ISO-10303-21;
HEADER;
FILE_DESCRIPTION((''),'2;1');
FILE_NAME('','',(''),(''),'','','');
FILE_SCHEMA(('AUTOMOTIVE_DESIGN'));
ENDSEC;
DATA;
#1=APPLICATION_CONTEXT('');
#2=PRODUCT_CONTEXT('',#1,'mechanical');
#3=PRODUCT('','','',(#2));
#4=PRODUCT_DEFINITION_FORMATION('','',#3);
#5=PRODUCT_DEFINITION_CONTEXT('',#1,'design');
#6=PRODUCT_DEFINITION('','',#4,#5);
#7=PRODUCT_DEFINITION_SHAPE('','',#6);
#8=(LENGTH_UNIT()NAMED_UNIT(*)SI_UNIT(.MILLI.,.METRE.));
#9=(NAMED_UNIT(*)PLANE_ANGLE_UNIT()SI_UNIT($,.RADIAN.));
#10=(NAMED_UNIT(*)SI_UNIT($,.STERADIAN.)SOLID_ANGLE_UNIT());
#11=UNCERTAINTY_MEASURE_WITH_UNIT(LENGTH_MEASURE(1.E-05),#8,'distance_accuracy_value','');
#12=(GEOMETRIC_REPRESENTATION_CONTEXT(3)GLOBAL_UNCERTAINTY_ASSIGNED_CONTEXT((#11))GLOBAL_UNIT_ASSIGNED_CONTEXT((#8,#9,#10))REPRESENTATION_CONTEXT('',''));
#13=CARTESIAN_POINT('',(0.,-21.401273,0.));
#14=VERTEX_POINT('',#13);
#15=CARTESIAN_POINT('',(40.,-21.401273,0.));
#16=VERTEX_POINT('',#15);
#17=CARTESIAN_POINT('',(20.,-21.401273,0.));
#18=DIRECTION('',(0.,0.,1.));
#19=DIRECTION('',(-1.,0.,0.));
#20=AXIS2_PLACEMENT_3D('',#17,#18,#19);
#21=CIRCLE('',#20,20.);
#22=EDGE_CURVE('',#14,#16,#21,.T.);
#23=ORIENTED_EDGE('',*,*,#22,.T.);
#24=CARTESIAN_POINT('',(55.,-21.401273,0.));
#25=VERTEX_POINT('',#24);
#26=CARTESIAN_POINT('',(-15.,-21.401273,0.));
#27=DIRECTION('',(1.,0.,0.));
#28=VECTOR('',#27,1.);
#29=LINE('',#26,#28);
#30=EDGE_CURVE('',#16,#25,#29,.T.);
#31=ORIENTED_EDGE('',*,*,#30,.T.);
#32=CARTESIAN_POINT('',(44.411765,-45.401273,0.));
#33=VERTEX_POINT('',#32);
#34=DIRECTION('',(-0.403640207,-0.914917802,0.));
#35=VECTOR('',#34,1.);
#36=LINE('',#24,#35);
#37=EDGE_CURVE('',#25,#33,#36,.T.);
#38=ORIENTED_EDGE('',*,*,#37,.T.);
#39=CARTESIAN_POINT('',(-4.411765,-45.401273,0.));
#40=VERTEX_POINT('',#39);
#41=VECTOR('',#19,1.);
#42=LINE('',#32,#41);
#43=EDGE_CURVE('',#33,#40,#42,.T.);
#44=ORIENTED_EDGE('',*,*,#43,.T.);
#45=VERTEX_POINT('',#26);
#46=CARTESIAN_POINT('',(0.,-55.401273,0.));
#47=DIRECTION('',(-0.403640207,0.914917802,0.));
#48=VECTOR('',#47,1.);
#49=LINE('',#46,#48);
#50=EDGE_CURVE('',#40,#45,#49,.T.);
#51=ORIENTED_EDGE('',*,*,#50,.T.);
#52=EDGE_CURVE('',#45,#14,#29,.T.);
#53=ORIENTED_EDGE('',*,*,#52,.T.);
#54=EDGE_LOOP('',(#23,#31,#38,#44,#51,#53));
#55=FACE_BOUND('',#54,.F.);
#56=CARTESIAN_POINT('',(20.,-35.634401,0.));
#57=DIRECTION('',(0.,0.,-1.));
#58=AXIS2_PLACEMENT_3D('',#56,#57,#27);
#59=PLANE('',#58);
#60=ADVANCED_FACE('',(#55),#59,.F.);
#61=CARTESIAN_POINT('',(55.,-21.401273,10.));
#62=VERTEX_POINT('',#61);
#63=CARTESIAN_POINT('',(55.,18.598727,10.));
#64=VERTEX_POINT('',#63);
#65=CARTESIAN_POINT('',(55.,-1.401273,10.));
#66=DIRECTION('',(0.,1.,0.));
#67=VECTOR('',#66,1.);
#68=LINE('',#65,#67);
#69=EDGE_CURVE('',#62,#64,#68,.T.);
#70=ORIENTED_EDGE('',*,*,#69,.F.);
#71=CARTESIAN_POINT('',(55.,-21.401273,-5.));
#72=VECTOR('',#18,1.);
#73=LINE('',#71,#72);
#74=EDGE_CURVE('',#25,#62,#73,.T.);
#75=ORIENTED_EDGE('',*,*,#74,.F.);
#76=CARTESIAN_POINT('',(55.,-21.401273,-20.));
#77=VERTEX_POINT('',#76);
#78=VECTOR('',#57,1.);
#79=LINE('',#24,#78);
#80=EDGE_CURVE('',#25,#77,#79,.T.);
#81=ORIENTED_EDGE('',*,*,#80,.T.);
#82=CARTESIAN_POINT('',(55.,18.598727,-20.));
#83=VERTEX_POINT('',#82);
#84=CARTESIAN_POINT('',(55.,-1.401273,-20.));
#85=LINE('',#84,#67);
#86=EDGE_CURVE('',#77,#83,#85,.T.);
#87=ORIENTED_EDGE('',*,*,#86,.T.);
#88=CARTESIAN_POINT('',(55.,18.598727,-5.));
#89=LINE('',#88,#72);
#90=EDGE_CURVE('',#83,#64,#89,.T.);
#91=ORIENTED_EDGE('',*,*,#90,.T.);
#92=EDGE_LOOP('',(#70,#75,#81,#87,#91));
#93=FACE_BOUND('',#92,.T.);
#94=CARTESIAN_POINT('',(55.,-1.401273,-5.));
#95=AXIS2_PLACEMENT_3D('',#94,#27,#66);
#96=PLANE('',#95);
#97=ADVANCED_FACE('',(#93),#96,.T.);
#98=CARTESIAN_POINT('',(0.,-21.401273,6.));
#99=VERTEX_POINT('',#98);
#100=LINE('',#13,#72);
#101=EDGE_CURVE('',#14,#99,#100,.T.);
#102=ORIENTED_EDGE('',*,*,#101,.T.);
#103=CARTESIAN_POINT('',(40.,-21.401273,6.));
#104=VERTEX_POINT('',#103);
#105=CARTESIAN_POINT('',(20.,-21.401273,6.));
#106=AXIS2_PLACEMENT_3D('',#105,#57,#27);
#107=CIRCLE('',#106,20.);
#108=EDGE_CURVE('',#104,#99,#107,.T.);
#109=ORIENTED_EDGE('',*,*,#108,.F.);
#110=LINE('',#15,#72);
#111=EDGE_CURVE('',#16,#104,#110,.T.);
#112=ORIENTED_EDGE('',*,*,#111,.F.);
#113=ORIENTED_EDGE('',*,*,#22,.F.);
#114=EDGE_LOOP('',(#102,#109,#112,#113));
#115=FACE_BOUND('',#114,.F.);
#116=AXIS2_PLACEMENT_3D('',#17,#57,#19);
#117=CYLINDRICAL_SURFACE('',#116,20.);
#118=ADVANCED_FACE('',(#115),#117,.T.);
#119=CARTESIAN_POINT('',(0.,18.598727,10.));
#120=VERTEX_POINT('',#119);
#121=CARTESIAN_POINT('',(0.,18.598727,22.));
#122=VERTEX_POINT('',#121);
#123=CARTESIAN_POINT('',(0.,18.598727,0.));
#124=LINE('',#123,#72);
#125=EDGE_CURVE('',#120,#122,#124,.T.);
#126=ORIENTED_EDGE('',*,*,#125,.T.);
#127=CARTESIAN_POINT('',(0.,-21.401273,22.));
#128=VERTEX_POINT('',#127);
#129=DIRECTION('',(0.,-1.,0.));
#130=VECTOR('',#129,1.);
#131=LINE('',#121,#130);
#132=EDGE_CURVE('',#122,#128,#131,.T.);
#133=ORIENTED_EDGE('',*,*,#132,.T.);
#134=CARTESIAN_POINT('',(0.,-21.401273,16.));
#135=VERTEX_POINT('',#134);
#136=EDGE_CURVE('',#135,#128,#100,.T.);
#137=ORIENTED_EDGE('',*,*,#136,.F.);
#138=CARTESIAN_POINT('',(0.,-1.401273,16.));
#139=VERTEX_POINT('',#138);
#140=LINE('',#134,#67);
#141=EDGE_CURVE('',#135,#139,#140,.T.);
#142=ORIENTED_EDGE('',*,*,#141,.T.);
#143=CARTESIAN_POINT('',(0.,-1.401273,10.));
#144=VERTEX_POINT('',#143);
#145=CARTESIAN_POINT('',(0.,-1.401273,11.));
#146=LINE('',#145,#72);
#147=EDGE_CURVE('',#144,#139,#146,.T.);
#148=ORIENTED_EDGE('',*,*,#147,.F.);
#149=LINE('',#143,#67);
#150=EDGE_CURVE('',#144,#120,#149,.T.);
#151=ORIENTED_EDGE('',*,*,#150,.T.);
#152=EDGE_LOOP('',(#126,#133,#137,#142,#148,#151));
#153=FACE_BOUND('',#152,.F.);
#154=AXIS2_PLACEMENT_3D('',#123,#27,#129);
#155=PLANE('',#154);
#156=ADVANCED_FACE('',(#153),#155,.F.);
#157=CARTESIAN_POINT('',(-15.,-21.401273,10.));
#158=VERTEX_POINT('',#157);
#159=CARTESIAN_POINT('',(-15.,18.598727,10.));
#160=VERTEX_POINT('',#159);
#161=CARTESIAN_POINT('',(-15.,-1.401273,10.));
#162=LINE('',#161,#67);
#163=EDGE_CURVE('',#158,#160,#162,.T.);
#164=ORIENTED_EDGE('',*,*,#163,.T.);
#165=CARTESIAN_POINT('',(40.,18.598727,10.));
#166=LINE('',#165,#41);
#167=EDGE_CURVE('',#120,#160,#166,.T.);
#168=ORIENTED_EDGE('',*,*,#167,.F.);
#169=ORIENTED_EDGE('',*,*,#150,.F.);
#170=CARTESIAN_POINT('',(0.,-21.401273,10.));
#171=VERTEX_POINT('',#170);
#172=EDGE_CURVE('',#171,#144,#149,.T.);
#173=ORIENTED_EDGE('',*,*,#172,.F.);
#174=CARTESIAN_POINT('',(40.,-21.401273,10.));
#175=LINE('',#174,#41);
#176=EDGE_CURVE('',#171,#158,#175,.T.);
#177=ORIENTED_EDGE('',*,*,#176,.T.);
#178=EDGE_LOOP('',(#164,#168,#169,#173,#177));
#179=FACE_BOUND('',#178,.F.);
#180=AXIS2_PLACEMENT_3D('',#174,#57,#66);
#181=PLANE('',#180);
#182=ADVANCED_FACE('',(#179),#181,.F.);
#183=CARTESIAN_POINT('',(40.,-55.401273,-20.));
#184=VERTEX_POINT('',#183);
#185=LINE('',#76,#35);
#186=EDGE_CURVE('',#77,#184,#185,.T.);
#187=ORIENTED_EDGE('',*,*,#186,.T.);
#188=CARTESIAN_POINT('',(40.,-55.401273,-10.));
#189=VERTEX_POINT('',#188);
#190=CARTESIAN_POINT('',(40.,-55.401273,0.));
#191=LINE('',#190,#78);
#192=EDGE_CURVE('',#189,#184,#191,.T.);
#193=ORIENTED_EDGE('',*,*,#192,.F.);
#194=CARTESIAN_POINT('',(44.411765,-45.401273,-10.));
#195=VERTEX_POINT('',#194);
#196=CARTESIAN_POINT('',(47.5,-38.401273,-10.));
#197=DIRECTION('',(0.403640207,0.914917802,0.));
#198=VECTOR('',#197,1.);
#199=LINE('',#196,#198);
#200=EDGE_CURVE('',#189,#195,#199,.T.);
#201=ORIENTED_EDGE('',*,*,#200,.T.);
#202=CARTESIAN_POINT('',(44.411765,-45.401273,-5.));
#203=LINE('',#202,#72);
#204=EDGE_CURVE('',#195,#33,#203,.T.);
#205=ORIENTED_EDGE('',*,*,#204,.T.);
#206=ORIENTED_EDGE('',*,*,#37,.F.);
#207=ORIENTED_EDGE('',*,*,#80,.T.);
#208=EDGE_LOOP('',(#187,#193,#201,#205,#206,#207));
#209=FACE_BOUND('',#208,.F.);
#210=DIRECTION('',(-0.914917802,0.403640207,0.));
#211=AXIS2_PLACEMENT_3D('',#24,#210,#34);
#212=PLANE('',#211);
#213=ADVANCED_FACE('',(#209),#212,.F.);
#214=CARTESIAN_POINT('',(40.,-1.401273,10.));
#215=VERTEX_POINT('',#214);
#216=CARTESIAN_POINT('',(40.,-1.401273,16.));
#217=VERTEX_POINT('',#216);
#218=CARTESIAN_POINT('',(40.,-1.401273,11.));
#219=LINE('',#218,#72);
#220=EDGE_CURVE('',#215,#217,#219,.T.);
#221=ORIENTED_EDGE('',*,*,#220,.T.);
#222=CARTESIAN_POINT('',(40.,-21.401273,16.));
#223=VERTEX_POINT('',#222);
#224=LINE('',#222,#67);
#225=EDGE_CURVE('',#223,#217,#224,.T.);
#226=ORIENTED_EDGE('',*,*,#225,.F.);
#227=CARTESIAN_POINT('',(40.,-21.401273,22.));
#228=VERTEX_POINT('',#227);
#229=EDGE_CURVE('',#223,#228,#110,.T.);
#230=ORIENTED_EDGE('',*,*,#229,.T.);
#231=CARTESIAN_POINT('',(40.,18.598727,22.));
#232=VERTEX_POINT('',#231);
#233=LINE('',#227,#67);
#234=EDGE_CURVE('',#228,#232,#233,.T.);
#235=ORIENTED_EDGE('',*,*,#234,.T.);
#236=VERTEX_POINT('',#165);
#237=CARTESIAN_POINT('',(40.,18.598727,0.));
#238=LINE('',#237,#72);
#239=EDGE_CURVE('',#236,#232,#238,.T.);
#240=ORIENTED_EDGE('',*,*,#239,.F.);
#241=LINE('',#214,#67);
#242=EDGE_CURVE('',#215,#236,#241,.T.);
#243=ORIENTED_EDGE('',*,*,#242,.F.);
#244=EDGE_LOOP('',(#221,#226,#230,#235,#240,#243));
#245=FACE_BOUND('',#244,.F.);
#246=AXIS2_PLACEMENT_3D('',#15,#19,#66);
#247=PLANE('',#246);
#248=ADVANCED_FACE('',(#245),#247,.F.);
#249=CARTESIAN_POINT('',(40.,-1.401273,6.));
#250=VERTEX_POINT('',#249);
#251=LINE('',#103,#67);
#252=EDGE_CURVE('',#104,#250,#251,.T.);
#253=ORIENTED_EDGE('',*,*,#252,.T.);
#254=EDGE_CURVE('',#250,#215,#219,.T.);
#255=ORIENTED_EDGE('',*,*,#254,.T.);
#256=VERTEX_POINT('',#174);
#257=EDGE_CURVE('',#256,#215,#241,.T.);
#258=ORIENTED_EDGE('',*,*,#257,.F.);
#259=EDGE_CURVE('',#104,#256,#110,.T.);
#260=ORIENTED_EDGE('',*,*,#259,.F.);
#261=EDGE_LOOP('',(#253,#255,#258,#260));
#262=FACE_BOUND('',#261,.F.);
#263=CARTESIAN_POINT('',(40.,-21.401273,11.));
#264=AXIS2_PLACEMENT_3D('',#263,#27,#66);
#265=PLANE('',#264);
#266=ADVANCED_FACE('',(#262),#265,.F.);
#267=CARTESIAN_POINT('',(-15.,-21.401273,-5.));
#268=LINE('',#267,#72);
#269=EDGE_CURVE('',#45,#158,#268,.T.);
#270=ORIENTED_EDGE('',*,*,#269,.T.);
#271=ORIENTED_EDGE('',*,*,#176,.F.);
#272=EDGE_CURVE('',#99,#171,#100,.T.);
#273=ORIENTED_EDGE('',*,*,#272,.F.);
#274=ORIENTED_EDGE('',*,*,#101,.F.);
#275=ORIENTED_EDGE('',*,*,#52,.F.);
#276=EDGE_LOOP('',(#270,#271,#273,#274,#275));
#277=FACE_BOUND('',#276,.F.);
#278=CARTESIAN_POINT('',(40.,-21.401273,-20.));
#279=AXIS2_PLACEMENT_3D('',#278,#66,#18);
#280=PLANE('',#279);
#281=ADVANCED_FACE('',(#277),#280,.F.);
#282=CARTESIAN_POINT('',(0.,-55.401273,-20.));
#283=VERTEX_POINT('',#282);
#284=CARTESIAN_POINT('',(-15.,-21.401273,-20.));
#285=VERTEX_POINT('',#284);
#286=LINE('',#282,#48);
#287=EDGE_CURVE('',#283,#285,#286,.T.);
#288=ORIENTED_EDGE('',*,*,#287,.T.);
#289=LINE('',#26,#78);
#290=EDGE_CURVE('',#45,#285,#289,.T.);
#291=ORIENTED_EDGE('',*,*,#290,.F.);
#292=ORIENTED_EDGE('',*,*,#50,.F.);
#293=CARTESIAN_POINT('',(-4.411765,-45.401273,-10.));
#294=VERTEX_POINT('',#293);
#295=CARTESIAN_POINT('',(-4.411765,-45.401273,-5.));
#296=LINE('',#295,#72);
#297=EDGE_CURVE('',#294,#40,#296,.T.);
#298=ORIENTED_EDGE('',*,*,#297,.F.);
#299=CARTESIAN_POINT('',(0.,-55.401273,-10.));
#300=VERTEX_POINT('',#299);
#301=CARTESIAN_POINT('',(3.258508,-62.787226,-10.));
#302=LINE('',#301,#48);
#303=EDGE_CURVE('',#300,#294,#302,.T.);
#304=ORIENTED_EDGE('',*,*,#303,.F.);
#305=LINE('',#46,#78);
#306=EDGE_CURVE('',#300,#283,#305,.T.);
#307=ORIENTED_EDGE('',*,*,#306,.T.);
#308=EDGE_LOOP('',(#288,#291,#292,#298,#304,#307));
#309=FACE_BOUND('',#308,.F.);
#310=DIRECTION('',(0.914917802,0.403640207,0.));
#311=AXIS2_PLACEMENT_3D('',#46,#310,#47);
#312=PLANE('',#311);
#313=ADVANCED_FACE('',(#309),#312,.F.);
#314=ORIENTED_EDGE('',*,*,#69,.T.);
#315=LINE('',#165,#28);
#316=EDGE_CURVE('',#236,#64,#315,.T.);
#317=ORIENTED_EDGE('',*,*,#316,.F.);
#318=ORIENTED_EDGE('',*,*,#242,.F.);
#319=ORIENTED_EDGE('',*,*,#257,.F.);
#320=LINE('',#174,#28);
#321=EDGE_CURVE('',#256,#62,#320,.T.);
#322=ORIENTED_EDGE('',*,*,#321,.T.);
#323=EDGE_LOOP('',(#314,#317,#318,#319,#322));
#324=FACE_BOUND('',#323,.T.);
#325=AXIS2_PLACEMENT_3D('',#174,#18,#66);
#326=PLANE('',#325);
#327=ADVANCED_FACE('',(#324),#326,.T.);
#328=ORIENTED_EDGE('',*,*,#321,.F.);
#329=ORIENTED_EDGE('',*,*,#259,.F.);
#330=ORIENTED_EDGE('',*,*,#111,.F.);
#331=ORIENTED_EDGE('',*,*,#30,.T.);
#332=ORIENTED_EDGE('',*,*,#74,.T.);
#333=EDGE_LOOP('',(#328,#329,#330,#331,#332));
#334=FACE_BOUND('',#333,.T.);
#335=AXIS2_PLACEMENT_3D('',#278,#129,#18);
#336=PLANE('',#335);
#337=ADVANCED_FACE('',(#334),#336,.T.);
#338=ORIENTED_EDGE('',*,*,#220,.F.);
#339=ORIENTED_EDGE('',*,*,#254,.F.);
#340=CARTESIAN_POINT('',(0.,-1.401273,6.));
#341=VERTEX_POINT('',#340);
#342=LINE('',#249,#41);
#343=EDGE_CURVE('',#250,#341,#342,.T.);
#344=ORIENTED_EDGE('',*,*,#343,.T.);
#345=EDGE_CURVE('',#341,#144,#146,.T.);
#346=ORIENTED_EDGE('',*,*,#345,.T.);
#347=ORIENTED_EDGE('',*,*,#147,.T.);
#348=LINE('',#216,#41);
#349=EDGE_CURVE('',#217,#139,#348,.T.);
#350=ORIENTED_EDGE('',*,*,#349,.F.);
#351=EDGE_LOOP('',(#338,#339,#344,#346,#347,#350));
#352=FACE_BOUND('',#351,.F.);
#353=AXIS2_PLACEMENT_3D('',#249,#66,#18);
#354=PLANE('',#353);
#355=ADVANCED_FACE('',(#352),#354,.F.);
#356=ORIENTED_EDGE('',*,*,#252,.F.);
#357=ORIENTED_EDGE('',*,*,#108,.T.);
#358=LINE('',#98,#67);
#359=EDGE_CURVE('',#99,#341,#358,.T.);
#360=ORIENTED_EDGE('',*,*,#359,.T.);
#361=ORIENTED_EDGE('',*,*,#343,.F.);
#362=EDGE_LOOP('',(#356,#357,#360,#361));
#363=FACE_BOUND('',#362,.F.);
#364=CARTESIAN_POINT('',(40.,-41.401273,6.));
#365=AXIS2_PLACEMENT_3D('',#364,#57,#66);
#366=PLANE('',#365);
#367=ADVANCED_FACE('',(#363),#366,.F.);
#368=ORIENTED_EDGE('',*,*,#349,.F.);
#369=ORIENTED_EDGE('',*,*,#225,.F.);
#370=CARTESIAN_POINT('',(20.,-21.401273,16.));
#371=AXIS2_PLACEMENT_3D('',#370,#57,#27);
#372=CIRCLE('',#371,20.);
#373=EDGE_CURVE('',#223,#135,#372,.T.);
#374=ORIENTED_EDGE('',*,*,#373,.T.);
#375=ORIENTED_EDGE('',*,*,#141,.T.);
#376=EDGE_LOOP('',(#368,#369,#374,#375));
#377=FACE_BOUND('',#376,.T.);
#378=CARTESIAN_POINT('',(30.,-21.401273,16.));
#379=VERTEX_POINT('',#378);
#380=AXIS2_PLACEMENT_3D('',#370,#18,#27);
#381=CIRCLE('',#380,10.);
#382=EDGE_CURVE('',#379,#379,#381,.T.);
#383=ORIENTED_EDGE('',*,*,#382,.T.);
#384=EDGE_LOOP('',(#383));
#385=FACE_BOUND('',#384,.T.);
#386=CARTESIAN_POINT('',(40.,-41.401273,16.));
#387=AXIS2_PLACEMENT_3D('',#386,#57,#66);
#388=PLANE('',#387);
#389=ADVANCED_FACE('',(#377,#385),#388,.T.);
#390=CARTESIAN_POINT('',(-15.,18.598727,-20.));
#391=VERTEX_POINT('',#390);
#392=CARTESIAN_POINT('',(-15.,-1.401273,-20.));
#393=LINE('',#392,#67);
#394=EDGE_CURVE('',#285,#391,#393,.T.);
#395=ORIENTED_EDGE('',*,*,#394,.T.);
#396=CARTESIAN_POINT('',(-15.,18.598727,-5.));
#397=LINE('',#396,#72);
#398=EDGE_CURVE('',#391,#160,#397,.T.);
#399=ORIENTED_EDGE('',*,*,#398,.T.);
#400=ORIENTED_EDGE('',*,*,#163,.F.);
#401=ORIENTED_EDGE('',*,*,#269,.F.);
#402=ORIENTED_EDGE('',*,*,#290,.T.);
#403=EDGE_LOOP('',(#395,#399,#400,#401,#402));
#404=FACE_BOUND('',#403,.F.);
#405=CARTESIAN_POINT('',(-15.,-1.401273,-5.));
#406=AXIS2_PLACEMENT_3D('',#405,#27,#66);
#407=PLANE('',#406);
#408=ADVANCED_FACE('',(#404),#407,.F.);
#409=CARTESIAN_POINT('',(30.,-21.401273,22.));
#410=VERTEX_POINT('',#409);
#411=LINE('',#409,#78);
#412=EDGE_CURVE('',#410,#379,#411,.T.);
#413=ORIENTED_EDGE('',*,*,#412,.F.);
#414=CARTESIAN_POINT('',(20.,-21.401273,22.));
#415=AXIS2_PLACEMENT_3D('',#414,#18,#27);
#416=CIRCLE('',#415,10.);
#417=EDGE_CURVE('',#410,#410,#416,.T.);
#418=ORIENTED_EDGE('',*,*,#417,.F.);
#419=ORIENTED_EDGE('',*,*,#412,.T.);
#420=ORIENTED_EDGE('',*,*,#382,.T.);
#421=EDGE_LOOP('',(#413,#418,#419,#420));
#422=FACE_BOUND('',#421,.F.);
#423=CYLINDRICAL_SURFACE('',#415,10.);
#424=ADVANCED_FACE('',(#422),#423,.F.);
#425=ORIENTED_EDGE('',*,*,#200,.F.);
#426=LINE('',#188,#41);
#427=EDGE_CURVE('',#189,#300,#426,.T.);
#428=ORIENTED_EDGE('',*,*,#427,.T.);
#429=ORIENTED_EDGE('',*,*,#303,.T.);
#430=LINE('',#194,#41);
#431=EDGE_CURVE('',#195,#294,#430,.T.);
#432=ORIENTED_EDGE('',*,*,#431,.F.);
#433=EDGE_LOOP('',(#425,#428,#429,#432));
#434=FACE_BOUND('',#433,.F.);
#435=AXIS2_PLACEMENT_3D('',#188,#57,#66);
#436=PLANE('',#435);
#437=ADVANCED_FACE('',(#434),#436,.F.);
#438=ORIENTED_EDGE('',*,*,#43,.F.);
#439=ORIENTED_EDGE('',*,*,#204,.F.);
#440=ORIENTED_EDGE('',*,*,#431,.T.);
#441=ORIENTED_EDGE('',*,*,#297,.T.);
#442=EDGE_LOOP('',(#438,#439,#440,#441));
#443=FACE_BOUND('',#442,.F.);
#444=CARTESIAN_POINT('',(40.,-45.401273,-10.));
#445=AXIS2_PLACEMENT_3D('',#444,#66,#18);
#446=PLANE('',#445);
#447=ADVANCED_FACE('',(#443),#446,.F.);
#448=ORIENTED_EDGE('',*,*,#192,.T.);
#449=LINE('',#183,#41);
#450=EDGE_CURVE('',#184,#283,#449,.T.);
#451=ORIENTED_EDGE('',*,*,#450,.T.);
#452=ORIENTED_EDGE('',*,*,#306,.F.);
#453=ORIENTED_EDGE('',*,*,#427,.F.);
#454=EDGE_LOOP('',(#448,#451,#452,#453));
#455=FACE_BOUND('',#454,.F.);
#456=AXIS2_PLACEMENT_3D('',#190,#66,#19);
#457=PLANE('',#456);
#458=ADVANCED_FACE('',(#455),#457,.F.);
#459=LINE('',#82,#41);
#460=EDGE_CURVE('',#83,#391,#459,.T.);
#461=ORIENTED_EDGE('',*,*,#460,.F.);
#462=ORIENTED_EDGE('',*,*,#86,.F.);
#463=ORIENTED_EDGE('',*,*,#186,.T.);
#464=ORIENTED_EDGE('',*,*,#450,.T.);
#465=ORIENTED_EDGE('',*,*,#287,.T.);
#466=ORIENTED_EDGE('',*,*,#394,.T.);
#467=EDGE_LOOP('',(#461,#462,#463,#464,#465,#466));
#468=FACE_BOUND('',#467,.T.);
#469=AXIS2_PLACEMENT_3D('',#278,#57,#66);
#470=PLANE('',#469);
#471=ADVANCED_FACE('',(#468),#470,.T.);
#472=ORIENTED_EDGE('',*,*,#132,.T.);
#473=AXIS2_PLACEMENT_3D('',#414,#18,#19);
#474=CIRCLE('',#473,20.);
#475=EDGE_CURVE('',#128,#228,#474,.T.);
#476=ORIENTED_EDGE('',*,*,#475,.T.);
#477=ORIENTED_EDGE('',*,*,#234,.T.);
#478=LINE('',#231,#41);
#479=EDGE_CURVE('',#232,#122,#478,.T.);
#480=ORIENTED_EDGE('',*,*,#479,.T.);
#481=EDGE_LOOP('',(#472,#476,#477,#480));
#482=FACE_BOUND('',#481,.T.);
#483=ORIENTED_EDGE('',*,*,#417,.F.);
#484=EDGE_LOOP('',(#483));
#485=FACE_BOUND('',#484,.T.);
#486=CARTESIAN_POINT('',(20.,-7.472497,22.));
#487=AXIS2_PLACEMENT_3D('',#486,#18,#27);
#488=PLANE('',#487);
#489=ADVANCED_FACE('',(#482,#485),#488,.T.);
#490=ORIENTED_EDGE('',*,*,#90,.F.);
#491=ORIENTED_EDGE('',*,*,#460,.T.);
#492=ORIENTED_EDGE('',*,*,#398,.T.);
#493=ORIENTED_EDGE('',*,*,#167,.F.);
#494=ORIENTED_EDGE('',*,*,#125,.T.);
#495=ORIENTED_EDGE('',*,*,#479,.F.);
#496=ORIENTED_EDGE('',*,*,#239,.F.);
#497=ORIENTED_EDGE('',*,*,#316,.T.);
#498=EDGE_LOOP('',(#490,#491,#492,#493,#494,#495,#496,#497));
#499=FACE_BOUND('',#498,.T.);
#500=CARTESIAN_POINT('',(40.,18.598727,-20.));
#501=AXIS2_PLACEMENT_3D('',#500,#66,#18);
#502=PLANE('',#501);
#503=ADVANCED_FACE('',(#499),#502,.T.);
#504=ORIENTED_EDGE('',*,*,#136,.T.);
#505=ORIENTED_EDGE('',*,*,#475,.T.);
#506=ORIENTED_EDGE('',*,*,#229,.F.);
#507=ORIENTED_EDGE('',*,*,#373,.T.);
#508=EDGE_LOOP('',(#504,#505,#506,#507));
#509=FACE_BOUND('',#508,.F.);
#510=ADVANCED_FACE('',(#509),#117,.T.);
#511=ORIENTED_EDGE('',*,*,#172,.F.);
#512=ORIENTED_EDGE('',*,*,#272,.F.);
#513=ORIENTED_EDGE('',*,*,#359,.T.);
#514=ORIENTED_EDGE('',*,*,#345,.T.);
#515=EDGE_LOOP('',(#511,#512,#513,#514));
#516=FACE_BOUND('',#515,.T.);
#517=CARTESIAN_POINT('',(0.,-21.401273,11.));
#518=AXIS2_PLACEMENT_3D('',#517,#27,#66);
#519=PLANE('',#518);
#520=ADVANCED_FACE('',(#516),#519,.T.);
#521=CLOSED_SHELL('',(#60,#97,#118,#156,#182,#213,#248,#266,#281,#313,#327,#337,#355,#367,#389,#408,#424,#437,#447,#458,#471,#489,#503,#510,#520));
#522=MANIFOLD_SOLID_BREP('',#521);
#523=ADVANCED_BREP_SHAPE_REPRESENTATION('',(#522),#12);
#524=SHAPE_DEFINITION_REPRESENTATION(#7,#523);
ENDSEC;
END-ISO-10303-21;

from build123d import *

# Parameters (mm, degrees)
F1_DEPTH       = 22
F3_R           = 10
F4_DEPTH       = 6
F6_DEPTH       = 20
F7_W           = 10
F7_H           = 10
F8_DEPTH       = 55.001
F8_DEPTH_BACK  = 15.001
F9_W           = 40
F9_H           = 30
F10_DEPTH      = 15
F10_DEPTH_BACK = 55
F2_W           = 40
F2_H           = 10
F11_DEPTH      = 40


# Not quite as in the source:
# - an extrude ends at something that could not be found from the text; its depth is read off the source's solid


with BuildPart() as f1:
    # F0 (on Top) → F1 (new body)
    with BuildSketch(Plane.XY):
        with BuildLine():
            Line((40, 18.5987265639), (0, 18.5987265639))
            Line((0, 18.5987265639), (0, -21.4012734361))
            ThreePointArc((0, -21.4012734361), (20, -41.4012734361), (40, -21.4012734361))
            Line((40, -21.4012734361), (40, 18.5987265639))
        make_face()
    extrude(amount=F1_DEPTH)

    # F3 (on face) → F4 (cut)
    with BuildSketch(Plane.XY.offset(22)):
        with Locations((20, -21.4012734361)):
            Circle(F3_R)
    extrude(amount=-F4_DEPTH, mode=Mode.SUBTRACT)

    # F5 (on face) → F6 (join)
    with BuildSketch(Plane(origin=(0, 0, 0), x_dir=(1, 0, 0), z_dir=(0, 0, -1))):
        Polygon((0, 55.4012734361), (-15, 21.4012734361), (55, 21.4012734361), (40, 55.4012734361), align=None)
    extrude(amount=F6_DEPTH)

    # F7 (on face) → F8 (cut, two sides)
    with BuildSketch(Plane.YZ.offset(40)) as f8_sk:
        with Locations((-50.4012734361, -5)):
            Rectangle(F7_W, F7_H)
    extrude(amount=-F8_DEPTH, mode=Mode.SUBTRACT)
    extrude(f8_sk.sketch, amount=F8_DEPTH_BACK, mode=Mode.SUBTRACT)

    # F9 (on face) → F10 (join, two sides)
    with BuildSketch(Plane.YZ.offset(40)) as f10_sk:
        with Locations((-1.4012734361, -5)):
            Rectangle(F9_W, F9_H)
    extrude(amount=F10_DEPTH)
    extrude(f10_sk.sketch, amount=-F10_DEPTH_BACK)

    # F2 (on face) → F11 (cut, through all)
    with BuildSketch(Plane.YZ.offset(40)):
        with Locations((-21.4012734361, 11)):
            Rectangle(F2_W, F2_H)
    extrude(amount=-F11_DEPTH, mode=Mode.SUBTRACT)


solid = f1.part
